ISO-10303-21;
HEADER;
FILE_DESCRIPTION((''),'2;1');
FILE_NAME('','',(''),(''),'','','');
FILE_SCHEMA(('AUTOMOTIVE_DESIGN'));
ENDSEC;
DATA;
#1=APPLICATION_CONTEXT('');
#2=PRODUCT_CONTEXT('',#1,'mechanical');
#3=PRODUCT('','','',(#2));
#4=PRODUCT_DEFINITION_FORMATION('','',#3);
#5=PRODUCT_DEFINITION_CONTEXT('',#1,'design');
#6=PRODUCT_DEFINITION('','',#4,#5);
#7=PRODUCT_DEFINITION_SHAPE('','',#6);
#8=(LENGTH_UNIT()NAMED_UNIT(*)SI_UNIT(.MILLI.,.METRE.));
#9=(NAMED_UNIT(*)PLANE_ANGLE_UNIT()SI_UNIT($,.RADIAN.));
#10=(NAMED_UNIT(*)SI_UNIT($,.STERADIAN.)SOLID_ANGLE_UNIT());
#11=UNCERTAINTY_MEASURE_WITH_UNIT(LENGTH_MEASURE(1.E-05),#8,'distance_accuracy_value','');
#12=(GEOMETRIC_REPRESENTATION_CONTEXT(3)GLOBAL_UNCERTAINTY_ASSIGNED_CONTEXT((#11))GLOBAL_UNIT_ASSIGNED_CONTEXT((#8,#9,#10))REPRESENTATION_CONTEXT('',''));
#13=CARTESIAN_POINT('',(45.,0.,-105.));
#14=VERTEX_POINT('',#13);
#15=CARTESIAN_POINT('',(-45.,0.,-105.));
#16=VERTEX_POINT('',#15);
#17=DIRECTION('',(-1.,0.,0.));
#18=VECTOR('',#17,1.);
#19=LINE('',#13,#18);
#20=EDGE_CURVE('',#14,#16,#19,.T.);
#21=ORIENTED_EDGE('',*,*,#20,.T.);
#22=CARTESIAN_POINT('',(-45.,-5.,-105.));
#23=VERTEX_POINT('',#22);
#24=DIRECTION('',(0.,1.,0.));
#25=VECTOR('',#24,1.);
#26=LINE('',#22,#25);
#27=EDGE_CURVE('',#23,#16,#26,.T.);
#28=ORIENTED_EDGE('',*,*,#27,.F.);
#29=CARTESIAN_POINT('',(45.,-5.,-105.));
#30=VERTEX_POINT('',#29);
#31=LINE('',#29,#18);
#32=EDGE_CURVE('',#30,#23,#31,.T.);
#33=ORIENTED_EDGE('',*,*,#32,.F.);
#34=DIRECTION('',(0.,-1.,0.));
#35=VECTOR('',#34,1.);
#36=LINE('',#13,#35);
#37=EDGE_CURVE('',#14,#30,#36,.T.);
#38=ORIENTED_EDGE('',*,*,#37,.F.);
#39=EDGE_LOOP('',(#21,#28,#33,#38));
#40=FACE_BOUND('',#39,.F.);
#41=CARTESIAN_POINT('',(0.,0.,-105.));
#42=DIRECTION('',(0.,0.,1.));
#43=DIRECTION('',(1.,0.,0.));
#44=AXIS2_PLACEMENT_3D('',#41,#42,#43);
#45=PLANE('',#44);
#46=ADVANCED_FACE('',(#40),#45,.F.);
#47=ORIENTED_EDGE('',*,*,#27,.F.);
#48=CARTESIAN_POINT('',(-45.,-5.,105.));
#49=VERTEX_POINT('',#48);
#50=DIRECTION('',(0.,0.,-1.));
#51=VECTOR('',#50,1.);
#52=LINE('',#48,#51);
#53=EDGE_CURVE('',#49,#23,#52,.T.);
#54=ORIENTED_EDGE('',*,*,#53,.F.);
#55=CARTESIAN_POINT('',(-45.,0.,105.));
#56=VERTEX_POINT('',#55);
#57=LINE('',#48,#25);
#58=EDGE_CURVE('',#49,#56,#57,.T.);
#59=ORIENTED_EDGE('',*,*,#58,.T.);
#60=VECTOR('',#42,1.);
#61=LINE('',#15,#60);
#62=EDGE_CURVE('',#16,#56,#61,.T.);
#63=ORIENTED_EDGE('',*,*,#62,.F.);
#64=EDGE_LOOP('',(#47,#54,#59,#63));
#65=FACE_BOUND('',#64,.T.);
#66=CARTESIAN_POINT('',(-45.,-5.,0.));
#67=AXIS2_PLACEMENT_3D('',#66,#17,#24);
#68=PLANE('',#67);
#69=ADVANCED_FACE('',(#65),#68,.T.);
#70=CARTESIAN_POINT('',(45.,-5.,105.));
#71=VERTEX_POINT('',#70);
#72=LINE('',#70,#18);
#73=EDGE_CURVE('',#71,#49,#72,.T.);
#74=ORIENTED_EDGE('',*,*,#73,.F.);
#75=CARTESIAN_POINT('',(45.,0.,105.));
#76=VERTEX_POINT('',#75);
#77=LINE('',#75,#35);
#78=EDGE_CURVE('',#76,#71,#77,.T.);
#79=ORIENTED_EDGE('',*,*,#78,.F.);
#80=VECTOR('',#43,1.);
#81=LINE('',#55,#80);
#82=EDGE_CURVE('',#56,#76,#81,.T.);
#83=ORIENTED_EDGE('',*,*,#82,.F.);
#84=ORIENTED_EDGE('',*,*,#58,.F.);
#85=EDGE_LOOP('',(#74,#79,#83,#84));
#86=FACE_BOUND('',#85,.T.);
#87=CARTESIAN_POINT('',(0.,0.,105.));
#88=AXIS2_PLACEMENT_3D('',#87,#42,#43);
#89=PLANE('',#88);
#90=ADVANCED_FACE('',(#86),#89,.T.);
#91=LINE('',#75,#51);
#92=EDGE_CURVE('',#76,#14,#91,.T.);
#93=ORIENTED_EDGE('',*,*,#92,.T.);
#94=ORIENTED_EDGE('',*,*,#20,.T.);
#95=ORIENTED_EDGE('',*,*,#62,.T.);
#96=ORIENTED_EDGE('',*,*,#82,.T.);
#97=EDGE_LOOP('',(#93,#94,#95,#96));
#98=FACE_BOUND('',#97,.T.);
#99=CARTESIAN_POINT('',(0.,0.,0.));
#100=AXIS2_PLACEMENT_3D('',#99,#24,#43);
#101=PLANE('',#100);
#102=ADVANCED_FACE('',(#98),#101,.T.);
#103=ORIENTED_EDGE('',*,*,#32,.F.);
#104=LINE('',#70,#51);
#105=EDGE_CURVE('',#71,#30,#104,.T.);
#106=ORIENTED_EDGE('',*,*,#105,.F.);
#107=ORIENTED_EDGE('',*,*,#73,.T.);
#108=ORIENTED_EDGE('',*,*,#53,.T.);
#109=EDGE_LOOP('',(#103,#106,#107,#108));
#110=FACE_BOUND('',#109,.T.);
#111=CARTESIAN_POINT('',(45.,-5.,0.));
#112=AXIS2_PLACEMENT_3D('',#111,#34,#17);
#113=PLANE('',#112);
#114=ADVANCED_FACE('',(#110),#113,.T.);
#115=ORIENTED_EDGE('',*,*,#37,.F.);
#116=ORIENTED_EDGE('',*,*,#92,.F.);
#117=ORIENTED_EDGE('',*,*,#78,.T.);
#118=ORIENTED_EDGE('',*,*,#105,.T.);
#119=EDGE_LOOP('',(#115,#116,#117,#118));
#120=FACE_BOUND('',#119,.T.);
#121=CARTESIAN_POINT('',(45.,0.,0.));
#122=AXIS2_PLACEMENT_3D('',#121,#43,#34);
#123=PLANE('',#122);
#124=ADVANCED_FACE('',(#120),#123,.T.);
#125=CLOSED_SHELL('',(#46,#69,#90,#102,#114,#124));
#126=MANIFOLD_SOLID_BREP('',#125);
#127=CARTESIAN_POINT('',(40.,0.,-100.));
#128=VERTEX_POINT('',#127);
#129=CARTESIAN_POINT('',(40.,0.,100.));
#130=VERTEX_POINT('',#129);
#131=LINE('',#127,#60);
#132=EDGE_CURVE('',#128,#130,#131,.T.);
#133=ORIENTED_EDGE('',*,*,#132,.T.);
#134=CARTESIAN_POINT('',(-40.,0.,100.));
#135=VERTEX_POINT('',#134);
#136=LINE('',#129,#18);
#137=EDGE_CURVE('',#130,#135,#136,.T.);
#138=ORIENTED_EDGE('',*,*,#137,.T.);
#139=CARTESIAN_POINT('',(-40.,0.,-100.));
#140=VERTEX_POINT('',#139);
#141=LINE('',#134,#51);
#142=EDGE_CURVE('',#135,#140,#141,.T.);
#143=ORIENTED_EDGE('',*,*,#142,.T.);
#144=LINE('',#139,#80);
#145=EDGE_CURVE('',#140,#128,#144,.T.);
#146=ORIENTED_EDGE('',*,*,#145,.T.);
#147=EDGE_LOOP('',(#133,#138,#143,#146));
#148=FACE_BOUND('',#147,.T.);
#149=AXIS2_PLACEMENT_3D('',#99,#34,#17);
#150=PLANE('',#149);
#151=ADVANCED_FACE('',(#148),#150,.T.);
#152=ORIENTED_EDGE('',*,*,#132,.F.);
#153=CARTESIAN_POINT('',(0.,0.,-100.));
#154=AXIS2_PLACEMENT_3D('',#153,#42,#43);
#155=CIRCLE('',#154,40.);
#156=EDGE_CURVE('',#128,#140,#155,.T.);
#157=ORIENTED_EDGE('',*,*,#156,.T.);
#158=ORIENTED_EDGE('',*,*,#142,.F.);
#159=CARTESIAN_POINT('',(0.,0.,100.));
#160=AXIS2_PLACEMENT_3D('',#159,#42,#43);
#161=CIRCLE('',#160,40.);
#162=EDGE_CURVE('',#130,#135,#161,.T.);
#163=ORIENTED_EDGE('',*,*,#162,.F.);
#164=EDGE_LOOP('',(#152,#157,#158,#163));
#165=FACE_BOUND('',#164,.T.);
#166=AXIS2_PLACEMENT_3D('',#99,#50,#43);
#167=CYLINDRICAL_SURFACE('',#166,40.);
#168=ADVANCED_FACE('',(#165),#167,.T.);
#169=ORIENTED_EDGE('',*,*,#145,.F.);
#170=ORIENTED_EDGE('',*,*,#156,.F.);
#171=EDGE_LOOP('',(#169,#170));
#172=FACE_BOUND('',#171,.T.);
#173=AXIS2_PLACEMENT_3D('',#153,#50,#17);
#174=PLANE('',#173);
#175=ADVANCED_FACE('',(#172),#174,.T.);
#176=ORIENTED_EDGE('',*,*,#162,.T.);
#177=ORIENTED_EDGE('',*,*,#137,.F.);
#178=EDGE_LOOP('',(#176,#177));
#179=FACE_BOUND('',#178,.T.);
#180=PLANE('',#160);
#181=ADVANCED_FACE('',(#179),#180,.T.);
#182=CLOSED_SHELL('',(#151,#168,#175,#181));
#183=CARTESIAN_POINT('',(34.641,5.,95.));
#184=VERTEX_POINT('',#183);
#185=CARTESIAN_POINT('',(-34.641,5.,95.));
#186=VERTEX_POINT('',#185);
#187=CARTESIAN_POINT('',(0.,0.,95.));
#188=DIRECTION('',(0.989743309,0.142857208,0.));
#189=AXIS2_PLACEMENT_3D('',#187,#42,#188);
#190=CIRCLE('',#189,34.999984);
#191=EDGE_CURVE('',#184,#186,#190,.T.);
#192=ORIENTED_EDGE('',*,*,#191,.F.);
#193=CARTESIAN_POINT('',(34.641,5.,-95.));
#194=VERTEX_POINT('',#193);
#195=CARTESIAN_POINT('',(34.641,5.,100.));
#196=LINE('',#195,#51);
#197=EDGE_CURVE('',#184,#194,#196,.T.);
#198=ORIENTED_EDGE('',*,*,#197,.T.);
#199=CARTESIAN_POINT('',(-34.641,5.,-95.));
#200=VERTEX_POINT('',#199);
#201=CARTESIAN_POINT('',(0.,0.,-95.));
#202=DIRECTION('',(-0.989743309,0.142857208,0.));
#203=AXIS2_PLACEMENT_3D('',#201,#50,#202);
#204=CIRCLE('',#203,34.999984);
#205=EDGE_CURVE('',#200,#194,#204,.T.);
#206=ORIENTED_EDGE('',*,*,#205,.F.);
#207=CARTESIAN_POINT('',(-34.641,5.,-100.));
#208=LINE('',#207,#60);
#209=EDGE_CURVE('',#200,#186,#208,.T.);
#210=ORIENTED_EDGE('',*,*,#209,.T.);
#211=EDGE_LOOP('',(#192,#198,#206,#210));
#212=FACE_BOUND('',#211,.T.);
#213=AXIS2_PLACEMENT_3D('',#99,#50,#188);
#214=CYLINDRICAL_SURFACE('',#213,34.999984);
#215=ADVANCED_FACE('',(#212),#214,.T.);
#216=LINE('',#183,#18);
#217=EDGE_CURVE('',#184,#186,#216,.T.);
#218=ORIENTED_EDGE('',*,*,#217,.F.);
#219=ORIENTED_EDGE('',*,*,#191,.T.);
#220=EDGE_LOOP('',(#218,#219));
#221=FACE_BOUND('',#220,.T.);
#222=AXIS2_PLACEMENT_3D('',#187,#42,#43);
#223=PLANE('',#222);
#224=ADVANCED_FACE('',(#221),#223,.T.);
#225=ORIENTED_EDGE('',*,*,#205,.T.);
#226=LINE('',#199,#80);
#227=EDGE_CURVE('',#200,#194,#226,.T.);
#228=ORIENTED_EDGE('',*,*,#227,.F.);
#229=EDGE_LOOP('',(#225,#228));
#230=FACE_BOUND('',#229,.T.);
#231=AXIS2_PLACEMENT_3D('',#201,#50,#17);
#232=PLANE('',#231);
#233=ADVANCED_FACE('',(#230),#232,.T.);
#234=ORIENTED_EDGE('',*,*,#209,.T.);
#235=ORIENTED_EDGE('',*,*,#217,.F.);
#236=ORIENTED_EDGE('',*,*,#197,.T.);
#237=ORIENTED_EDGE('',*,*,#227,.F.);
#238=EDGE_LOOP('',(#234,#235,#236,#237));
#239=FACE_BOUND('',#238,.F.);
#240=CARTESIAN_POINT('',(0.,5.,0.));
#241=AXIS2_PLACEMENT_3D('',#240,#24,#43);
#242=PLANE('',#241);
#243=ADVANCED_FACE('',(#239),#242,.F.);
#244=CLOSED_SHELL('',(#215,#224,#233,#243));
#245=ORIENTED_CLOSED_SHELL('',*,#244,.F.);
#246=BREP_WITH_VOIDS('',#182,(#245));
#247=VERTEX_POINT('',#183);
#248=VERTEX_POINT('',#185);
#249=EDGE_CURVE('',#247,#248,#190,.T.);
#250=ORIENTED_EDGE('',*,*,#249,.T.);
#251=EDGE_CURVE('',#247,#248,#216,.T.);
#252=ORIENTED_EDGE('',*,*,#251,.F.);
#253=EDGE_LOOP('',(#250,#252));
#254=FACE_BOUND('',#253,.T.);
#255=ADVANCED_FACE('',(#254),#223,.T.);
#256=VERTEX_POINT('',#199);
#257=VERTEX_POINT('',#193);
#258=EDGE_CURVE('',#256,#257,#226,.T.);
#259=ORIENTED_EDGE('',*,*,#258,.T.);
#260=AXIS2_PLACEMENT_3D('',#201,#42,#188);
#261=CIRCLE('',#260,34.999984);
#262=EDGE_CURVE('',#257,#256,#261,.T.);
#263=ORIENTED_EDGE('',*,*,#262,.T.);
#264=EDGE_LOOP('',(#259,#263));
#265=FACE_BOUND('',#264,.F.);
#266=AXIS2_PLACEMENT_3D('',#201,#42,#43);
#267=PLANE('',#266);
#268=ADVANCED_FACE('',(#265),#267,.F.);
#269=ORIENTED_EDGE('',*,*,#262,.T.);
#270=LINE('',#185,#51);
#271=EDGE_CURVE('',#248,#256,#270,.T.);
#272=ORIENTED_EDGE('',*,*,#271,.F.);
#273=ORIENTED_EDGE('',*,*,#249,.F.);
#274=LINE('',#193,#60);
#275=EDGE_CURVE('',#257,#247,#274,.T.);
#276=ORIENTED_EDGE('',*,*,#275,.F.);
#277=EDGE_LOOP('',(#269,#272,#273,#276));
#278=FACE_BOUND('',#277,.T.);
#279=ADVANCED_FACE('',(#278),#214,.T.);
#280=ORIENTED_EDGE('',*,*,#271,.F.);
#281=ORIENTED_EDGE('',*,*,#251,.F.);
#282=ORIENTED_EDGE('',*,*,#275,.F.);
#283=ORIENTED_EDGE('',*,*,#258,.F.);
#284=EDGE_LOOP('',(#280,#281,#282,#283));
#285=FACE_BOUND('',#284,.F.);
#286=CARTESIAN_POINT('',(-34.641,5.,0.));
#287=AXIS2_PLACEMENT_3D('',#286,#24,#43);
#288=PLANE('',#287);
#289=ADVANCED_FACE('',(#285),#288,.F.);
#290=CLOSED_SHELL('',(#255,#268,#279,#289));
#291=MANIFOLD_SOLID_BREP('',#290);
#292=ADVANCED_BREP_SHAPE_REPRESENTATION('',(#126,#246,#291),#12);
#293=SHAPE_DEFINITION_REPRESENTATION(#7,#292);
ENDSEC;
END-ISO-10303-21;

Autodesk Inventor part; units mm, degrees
ref_plane "YZ Plane" through (0, 0, 0) normal (1, 0, 0) x (0, 1, 0)
ref_plane "XZ Plane" through (0, 0, 0) normal (0, 1, 0) x (-1, 0, 0)
ref_plane "XY Plane" through (0, 0, 0) normal (0, 0, 1) x (1, 0, 0)
sketch "Sketch1" plane through (0, 0, 0) normal (0, 0, 1) x (1, 0, 0)
  line L0 (0, 0) -> (40, 0)
  arc A0 (40, 0) -> (-40, 0) centre (0, 0) ccw
  line L1 (0, 0) -> (-40, 0)
  line L2 (0, 5) -> (34.641, 5)
  arc A1 (34.641, 5) -> (-34.641, 5) centre (0, 0) ccw
  line L3 (-34.641, 5) -> (0, 5)
  line L4 (40, 0) -> (45, 0)
  line L5 (45, 0) -> (45, -5)
  line L6 (45, -5) -> (-45, -5)
  line L7 (-45, -5) -> (-45, 0)
  line L8 (-45, 0) -> (-40, 0)
  dimension "d0" = 40
  dimension "d1" = 5
  dimension "d2" = 5
  dimension "d3" = 5
  dimension "d4" = 90
extrude "Extrusion1" add sketch "Sketch1" along normal mid plane 190 contours L3 A1 L2
extrude "Extrusion2" add sketch "Sketch1" along normal mid plane 200 separate body contours L1 A0 L0
extrude "Extrusion3" add sketch "Sketch1" along normal mid plane 210 separate body contours L0 L4 L5 L6 L7 L8 L1
sketch "Sketch2" plane through (0, 0, 100) normal (0, 0, 1) x (1, 0, 0)
  arc A0 (34.641, 5) -> (-34.641, 5) centre (0, 0) ccw projected
  line L0 (34.641, 5) -> (-34.641, 5) projected
extrude "Extrusion4" add sketch "Sketch2" against normal blind 5 separate body
sketch "Sketch3" plane through (0, 0, -100) normal (0, 0, -1) x (-1, 0, 0)
  arc A0 (34.641, 5) -> (-34.641, 5) centre (0, 0) ccw projected
  line L0 (34.641, 5) -> (-34.641, 5) projected
extrude "Extrusion5" add sketch "Sketch3" against normal blind 5 separate body
combine bodies "Combine1" operation type add bodies to combine 5 4 2
properties part number "Project"
